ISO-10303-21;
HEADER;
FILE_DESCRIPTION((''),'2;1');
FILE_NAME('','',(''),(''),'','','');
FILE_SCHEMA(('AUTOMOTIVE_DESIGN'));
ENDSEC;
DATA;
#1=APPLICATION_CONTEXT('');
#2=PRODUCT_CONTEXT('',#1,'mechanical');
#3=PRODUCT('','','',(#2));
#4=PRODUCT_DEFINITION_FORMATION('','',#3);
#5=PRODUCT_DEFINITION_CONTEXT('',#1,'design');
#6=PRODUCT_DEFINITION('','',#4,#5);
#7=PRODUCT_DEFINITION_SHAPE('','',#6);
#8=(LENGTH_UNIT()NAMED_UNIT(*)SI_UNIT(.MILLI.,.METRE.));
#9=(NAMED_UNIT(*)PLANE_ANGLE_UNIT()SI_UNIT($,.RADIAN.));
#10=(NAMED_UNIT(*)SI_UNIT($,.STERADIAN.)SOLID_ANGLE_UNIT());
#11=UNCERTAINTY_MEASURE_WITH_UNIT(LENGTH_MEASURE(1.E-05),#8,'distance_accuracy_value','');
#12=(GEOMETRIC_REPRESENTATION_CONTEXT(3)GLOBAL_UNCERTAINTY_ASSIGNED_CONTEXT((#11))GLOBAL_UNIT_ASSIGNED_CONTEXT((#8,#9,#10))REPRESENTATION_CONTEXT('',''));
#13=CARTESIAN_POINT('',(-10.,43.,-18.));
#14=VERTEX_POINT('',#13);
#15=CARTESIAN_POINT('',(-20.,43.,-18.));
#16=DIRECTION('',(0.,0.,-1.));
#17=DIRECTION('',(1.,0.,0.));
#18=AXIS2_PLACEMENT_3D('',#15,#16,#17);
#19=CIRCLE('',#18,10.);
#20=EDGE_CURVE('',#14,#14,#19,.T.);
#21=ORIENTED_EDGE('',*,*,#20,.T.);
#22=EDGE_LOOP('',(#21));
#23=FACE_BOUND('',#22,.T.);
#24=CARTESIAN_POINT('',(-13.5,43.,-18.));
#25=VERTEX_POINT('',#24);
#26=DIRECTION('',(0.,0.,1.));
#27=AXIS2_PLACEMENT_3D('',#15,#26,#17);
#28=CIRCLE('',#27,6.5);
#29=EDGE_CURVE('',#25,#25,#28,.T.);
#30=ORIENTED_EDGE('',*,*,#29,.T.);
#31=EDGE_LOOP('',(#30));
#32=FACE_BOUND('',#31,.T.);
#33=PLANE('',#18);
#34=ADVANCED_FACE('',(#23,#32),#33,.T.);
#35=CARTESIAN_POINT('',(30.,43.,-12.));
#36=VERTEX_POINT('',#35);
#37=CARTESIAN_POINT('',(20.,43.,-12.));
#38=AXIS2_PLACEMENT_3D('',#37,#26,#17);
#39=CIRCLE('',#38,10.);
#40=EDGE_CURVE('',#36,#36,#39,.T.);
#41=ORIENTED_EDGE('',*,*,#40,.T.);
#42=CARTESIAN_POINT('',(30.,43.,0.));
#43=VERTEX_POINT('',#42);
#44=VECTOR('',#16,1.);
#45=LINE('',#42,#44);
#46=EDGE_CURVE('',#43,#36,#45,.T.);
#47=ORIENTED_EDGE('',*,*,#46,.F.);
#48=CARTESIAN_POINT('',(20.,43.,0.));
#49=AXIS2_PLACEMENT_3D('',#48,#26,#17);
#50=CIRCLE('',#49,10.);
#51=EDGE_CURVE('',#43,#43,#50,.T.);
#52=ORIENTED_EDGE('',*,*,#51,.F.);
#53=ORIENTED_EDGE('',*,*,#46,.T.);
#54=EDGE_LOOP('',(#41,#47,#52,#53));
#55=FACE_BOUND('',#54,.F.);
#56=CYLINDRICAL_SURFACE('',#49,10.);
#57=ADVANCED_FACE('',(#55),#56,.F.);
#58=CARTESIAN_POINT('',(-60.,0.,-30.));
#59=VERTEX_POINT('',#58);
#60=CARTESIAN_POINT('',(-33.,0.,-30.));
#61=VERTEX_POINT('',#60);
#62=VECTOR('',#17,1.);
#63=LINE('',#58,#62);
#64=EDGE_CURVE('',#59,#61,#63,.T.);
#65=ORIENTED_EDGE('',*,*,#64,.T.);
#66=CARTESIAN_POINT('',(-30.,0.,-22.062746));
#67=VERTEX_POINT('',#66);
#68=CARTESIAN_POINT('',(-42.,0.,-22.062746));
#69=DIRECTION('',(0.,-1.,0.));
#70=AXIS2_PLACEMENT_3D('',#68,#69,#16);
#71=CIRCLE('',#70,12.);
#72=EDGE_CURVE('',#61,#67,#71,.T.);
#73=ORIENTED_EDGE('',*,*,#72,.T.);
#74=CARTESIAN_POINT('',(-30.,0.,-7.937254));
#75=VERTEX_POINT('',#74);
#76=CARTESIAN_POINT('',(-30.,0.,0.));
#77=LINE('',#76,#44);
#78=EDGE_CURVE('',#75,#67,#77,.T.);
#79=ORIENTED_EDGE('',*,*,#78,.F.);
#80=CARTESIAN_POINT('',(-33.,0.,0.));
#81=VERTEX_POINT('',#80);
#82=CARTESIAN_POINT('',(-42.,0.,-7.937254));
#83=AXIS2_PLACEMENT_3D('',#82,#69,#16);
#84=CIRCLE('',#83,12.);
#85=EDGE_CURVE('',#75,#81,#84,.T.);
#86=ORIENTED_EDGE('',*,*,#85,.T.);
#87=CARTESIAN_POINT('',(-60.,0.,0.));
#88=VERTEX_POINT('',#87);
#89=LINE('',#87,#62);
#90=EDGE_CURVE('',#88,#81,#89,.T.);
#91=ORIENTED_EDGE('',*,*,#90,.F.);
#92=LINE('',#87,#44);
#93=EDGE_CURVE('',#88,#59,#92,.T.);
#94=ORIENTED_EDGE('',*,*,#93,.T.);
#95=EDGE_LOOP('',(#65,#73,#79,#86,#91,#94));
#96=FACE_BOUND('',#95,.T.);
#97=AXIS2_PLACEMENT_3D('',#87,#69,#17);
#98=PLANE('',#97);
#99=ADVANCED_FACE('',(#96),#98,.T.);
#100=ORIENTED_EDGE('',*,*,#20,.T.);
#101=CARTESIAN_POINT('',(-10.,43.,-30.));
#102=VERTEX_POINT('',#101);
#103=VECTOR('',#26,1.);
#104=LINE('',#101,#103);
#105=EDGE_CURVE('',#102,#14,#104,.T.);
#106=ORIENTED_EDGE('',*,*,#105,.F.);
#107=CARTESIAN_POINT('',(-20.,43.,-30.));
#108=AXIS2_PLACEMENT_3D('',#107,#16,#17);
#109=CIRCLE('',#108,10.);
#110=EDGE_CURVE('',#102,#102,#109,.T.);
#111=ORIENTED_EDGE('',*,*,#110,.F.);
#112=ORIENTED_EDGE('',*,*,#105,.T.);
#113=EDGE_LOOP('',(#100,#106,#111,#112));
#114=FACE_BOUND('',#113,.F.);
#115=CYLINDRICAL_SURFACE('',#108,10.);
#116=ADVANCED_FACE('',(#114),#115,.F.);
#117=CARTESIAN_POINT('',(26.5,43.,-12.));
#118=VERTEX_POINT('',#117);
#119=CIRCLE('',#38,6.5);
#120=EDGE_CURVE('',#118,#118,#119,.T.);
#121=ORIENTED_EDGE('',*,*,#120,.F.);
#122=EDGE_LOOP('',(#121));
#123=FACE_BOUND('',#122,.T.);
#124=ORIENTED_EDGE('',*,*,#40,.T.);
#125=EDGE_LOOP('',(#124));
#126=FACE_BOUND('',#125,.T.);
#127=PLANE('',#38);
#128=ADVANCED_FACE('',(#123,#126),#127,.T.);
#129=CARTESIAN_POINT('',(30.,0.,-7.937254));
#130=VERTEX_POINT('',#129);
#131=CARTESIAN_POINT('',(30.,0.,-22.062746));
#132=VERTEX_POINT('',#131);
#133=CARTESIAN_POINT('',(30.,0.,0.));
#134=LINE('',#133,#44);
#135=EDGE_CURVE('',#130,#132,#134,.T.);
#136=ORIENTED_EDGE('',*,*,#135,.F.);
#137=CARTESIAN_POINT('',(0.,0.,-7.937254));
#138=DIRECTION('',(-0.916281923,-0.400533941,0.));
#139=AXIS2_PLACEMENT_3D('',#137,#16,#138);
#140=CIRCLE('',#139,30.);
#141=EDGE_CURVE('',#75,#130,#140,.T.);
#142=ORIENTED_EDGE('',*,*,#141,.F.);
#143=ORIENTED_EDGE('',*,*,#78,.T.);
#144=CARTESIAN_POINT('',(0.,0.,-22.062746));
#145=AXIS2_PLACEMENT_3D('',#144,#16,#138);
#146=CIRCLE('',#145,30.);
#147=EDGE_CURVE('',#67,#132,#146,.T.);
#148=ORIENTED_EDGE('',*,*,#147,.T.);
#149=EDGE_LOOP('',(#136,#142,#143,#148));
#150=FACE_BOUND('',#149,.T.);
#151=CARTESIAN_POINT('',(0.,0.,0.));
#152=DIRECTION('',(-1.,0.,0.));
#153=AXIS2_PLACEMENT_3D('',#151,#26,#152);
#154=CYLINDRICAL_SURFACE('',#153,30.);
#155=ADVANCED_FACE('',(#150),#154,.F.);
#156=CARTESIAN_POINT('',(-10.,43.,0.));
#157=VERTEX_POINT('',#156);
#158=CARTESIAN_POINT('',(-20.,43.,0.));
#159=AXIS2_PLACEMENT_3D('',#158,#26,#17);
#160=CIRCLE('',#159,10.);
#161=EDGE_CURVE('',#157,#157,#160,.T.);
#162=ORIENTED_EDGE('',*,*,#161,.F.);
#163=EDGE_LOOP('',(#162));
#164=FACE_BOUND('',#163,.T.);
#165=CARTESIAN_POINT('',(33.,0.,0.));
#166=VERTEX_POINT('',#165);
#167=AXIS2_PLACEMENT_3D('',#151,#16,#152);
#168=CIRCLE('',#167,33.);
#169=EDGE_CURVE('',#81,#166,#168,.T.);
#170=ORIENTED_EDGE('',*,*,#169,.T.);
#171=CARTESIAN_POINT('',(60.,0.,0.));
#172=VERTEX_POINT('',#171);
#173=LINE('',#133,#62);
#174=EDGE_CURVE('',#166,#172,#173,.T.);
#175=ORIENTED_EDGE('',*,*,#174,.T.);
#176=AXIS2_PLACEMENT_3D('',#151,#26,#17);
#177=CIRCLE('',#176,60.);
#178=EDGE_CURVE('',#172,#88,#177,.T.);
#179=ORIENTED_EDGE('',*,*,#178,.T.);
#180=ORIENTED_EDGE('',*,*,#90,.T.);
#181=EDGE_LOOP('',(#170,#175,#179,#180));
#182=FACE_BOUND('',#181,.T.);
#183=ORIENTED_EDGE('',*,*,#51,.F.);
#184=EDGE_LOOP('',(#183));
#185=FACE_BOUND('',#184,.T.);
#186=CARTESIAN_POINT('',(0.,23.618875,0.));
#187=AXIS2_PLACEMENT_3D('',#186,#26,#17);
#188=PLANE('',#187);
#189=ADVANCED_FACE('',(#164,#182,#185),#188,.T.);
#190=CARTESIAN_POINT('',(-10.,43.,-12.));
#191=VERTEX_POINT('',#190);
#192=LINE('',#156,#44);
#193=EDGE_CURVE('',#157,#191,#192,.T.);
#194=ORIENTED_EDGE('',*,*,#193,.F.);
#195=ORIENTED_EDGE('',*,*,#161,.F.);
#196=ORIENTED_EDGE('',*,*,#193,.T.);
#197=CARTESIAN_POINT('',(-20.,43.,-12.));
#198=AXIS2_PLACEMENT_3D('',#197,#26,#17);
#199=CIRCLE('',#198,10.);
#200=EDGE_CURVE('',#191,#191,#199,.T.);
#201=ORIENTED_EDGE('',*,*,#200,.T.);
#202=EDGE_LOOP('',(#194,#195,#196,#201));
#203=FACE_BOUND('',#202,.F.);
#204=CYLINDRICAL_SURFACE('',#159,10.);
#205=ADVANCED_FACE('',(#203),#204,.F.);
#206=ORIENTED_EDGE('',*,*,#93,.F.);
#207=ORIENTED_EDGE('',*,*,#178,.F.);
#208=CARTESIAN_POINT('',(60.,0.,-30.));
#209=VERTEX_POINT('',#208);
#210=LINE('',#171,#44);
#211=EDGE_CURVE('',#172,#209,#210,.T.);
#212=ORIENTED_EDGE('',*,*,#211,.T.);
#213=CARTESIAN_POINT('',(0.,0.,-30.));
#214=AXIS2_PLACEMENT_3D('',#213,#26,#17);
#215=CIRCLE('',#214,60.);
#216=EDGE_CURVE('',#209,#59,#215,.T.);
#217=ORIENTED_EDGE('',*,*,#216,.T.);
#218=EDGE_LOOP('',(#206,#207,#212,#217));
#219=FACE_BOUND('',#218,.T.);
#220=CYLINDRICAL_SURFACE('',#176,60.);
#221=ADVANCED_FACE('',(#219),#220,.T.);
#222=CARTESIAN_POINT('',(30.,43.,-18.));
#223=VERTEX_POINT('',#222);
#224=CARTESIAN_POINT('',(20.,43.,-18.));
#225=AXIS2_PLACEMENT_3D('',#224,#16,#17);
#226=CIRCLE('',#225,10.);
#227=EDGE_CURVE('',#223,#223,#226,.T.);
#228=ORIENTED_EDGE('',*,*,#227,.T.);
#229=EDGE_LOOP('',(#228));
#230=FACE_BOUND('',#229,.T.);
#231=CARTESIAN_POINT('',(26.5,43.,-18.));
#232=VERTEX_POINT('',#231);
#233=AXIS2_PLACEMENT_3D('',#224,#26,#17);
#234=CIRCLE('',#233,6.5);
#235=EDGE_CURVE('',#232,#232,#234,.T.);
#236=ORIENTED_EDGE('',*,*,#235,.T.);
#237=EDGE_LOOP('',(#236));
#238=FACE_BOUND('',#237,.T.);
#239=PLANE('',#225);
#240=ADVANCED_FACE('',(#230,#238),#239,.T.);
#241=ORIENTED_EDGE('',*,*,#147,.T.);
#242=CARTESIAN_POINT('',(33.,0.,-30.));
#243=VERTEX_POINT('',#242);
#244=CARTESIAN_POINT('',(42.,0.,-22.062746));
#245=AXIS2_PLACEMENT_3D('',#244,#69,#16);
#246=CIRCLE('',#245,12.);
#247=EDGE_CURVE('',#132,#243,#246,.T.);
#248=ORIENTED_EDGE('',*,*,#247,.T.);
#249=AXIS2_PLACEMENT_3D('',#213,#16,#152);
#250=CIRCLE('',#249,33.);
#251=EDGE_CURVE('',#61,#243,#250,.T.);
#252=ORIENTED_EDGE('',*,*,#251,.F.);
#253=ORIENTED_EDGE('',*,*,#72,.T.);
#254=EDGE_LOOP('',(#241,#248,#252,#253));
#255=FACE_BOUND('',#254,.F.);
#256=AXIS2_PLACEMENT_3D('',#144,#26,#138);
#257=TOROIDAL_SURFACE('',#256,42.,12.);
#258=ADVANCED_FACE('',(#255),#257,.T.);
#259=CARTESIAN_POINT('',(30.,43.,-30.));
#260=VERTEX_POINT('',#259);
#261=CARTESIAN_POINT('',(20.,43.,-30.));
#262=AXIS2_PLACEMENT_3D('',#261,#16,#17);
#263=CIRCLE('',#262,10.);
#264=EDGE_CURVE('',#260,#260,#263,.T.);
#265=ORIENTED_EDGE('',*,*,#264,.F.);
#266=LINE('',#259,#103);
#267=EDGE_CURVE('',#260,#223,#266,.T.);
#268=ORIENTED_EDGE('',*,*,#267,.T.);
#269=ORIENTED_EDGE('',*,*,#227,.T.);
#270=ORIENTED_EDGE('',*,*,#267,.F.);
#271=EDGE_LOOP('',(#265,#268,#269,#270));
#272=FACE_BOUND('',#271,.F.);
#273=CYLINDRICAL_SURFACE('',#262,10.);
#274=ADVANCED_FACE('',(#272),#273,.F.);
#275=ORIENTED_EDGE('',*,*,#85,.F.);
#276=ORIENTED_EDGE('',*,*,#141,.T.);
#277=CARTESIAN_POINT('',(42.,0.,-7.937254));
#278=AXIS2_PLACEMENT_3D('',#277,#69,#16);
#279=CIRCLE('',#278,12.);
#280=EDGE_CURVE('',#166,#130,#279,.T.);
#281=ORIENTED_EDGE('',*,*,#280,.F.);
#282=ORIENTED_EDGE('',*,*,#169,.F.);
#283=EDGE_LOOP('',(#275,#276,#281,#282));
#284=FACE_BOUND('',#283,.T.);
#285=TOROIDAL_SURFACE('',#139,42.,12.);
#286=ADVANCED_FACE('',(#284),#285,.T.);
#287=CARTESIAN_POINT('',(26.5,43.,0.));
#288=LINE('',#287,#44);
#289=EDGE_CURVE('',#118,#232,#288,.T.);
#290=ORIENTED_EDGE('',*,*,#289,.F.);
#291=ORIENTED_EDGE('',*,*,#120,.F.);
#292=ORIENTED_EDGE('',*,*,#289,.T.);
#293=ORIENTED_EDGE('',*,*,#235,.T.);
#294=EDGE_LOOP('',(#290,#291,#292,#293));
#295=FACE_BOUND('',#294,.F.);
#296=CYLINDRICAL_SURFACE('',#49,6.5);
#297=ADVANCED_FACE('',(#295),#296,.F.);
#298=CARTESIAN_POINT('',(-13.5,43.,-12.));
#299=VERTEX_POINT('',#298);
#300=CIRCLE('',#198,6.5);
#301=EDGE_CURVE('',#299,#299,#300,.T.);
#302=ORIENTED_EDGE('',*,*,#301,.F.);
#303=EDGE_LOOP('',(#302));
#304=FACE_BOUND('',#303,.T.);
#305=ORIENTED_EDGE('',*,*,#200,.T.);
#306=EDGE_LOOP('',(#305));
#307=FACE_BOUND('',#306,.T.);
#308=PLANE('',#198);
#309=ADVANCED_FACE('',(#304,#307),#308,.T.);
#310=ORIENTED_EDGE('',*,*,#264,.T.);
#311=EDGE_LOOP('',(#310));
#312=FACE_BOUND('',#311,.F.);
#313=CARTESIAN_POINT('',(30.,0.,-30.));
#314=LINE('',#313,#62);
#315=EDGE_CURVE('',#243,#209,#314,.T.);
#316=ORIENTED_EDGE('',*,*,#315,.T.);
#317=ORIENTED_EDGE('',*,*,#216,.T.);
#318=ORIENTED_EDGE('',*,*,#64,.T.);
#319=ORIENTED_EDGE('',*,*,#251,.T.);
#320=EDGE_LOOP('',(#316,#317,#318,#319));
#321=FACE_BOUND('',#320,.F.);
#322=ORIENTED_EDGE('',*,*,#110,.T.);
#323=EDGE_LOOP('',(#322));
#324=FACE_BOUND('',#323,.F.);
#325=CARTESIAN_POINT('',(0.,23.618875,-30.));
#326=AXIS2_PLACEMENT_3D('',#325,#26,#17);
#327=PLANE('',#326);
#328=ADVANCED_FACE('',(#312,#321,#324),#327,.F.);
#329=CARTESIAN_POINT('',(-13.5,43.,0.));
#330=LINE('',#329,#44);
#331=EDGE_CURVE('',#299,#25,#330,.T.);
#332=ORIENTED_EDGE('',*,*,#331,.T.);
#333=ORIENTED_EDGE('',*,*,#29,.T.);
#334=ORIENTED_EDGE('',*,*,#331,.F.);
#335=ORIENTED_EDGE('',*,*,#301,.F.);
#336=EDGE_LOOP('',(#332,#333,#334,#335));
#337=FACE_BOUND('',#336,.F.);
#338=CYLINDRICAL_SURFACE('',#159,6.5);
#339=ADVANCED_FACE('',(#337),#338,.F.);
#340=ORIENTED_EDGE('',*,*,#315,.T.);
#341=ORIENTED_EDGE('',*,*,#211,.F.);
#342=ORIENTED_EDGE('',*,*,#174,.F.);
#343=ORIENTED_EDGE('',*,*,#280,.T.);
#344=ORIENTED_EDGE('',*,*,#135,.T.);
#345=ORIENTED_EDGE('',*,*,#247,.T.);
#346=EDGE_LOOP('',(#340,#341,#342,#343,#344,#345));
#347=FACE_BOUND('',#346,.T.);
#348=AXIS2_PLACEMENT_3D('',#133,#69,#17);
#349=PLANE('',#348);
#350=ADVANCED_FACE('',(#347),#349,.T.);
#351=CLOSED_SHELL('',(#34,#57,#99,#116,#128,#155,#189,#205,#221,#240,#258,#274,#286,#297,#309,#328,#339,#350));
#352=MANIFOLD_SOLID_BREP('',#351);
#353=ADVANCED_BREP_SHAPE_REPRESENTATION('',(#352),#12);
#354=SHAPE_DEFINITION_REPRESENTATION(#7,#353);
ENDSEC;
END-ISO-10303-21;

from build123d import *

# Parameters (mm, degrees)
F1_DEPTH    = 30
F2_R        = 6.5
F3_DEPTH    = 30
F4_R        = 10
F5_DEPTH    = 12
F6_R        = 10
F7_DEPTH    = 12
F8_SIZE     = 3
F9_T2_ANGLE = 227.2231239027
F9_T4_ANGLE = 227.2231239027


# Not quite as in the source:
# - a fillet or chamfer that OpenCascade refuses, or shapes differently, is made with other operations: its cross-section is extruded or revolved along the edge and cut away or added


with BuildPart() as f1:
    # F0 (on Top) → F1 (new body)
    with BuildSketch(Plane.XY):
        with BuildLine():
            Line((30, 0), (60, 0))
            ThreePointArc((60, 0), (0, 60), (-60, 0))
            Line((-60, 0), (-30, 0))
            ThreePointArc((-30, 0), (0, 30), (30, 0))
        make_face()
    extrude(amount=-F1_DEPTH)

    # F2 (on face) → F3 (cut, through all)
    with BuildSketch(Plane.XY):
        with Locations((20, 43)):
            Circle(F2_R)
        with Locations((-20, 43)):
            Circle(F2_R)
    extrude(amount=-F3_DEPTH, mode=Mode.SUBTRACT)

    # F4 (on face) → F5 (cut)
    with BuildSketch(Plane.XY):
        with Locations((20, 43)):
            Circle(F4_R)
        with Locations((-20, 43)):
            Circle(F4_R)
    extrude(amount=-F5_DEPTH, mode=Mode.SUBTRACT)

    # F6 (on face) → F7 (cut)
    with BuildSketch(Plane(origin=(0, 0, -30), x_dir=(1, 0, 0), z_dir=(0, 0, -1))):
        with Locations((-20, -43)):
            Circle(F6_R)
        with Locations((20, -43)):
            Circle(F6_R)
    extrude(amount=-F7_DEPTH, mode=Mode.SUBTRACT)

    # F8
    f8_edges = [f1.edges().sort_by_distance(p)[0] for p in [
        (0, 30, -30),
        (0, 30, 0),
    ]]
    chamfer(f8_edges, length=F8_SIZE)

    # F9: fillet of radius 12 on 2 edges, made by hand

    # F9_s1 → F9_t2 (revolve, cut)
    with BuildSketch(Plane(origin=(0, 0, 0), x_dir=(0, 0, 1), z_dir=(0.400533941, -0.9162819228, 0))):
        with BuildLine():
            ThreePointArc((-22.0627460668, 30), (-26.3053867539, 30.7750278397), (-30, 33))
            Line((-30, 33), (-27, 30))
            Line((-27, 30), (-22.0627460668, 30))
        make_face()
    revolve(axis=Axis((0, 0, -27), (0, 0, -1)), revolution_arc=F9_T2_ANGLE, mode=Mode.SUBTRACT)

    # F9_s3 → F9_t4 (revolve, cut)
    with BuildSketch(Plane(origin=(0, 0, 0), x_dir=(0, 0, 1), z_dir=(0.400533941, -0.9162819228, 0))):
        with BuildLine():
            ThreePointArc((-7.9372539332, 30), (-3.6946132461, 30.7750278397), (0, 33))
            Line((0, 33), (-3, 30))
            Line((-3, 30), (-7.9372539332, 30))
        make_face()
    revolve(axis=Axis((0, 0, -3), (0, 0, -1)), revolution_arc=F9_T4_ANGLE, mode=Mode.SUBTRACT)


solid = f1.part
